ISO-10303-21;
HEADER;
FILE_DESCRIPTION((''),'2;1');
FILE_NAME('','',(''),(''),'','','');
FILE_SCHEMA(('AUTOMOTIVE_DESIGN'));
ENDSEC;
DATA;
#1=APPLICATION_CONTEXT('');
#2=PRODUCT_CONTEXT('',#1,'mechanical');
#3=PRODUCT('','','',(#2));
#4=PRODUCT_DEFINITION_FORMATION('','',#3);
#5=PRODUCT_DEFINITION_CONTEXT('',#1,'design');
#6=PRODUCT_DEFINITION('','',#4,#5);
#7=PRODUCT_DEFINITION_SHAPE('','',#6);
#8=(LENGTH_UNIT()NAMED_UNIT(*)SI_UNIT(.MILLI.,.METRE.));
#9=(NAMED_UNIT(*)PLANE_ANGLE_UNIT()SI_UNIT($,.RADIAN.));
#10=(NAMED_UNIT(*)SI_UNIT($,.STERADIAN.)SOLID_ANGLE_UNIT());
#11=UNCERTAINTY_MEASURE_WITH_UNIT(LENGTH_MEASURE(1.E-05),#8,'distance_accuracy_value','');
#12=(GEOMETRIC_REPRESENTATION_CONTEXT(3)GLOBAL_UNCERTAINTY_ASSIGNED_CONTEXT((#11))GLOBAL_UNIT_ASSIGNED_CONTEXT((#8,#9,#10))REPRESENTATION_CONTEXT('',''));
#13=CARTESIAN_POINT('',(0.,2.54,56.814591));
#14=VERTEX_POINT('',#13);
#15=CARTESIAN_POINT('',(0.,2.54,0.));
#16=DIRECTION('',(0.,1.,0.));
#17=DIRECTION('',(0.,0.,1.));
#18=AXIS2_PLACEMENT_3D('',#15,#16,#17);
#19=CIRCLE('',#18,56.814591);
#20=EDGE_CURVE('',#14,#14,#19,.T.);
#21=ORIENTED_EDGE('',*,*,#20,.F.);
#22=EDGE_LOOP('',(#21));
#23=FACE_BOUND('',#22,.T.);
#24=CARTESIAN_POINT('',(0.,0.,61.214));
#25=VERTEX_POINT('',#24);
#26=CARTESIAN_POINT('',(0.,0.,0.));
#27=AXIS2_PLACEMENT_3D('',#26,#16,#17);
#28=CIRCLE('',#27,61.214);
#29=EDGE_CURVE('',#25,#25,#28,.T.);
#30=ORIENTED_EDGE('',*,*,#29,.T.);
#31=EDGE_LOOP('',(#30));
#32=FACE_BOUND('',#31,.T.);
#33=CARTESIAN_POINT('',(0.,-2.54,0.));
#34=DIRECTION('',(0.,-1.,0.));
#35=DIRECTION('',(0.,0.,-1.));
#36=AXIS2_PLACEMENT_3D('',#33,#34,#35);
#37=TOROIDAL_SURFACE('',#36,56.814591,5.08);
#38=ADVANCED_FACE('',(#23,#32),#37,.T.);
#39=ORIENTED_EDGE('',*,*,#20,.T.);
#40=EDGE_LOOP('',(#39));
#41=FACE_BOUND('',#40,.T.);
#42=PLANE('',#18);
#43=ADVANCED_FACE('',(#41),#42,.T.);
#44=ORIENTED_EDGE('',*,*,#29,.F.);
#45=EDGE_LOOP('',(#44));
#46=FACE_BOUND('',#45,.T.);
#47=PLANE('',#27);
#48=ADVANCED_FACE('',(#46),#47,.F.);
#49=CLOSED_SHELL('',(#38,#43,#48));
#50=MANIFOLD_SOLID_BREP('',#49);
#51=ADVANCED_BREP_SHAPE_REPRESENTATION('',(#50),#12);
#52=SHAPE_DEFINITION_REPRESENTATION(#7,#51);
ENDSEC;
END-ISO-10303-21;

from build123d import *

# Parameters (mm, degrees)
SKETCH2_R           = 61.214
BOSS_EXTRUDE1_DEPTH = 2.54
FILLET1_R           = 5.08


with BuildPart() as part:
    # Sketch2 → Boss-Extrude1 (new body)
    with BuildSketch(Plane(origin=(0, 0, 0), x_dir=(1, 0, 0), z_dir=(0, 1, 0))):
        with Locations(Location((0, 0, 0), (0, 0, 270))):
            Circle(SKETCH2_R)
    extrude(amount=BOSS_EXTRUDE1_DEPTH)

    # Fillet1
    # the kernel refuses this fillet: 5.08 mm, written as the material it takes off along each edge
    with BuildSketch(Plane(origin=(0, 2.54, 0), x_dir=(0, 0, 1), z_dir=(-1, 0, 0))) as fillet1_piece_1:
        with BuildLine():
            CenterArc((56.814590949, -5.08), FILLET1_R, 30, 60)
            Line((56.814590949, 0), (56.814590949, 0.1016))
            Line((56.814590949, 0.1016), (61.214, 0.1016))
            Line((61.214, 0.1016), (61.3156, 0))
            ThreePointArc((61.3156, 0), (61.3156, -1.27), (61.301988181, -2.4892))
            Line((61.301988181, -2.4892), (61.214, -2.54))
        make_face()
    revolve(axis=Axis((0, 2.54, 0), (0, 1, 0)), mode=Mode.SUBTRACT)


solid = part.part
